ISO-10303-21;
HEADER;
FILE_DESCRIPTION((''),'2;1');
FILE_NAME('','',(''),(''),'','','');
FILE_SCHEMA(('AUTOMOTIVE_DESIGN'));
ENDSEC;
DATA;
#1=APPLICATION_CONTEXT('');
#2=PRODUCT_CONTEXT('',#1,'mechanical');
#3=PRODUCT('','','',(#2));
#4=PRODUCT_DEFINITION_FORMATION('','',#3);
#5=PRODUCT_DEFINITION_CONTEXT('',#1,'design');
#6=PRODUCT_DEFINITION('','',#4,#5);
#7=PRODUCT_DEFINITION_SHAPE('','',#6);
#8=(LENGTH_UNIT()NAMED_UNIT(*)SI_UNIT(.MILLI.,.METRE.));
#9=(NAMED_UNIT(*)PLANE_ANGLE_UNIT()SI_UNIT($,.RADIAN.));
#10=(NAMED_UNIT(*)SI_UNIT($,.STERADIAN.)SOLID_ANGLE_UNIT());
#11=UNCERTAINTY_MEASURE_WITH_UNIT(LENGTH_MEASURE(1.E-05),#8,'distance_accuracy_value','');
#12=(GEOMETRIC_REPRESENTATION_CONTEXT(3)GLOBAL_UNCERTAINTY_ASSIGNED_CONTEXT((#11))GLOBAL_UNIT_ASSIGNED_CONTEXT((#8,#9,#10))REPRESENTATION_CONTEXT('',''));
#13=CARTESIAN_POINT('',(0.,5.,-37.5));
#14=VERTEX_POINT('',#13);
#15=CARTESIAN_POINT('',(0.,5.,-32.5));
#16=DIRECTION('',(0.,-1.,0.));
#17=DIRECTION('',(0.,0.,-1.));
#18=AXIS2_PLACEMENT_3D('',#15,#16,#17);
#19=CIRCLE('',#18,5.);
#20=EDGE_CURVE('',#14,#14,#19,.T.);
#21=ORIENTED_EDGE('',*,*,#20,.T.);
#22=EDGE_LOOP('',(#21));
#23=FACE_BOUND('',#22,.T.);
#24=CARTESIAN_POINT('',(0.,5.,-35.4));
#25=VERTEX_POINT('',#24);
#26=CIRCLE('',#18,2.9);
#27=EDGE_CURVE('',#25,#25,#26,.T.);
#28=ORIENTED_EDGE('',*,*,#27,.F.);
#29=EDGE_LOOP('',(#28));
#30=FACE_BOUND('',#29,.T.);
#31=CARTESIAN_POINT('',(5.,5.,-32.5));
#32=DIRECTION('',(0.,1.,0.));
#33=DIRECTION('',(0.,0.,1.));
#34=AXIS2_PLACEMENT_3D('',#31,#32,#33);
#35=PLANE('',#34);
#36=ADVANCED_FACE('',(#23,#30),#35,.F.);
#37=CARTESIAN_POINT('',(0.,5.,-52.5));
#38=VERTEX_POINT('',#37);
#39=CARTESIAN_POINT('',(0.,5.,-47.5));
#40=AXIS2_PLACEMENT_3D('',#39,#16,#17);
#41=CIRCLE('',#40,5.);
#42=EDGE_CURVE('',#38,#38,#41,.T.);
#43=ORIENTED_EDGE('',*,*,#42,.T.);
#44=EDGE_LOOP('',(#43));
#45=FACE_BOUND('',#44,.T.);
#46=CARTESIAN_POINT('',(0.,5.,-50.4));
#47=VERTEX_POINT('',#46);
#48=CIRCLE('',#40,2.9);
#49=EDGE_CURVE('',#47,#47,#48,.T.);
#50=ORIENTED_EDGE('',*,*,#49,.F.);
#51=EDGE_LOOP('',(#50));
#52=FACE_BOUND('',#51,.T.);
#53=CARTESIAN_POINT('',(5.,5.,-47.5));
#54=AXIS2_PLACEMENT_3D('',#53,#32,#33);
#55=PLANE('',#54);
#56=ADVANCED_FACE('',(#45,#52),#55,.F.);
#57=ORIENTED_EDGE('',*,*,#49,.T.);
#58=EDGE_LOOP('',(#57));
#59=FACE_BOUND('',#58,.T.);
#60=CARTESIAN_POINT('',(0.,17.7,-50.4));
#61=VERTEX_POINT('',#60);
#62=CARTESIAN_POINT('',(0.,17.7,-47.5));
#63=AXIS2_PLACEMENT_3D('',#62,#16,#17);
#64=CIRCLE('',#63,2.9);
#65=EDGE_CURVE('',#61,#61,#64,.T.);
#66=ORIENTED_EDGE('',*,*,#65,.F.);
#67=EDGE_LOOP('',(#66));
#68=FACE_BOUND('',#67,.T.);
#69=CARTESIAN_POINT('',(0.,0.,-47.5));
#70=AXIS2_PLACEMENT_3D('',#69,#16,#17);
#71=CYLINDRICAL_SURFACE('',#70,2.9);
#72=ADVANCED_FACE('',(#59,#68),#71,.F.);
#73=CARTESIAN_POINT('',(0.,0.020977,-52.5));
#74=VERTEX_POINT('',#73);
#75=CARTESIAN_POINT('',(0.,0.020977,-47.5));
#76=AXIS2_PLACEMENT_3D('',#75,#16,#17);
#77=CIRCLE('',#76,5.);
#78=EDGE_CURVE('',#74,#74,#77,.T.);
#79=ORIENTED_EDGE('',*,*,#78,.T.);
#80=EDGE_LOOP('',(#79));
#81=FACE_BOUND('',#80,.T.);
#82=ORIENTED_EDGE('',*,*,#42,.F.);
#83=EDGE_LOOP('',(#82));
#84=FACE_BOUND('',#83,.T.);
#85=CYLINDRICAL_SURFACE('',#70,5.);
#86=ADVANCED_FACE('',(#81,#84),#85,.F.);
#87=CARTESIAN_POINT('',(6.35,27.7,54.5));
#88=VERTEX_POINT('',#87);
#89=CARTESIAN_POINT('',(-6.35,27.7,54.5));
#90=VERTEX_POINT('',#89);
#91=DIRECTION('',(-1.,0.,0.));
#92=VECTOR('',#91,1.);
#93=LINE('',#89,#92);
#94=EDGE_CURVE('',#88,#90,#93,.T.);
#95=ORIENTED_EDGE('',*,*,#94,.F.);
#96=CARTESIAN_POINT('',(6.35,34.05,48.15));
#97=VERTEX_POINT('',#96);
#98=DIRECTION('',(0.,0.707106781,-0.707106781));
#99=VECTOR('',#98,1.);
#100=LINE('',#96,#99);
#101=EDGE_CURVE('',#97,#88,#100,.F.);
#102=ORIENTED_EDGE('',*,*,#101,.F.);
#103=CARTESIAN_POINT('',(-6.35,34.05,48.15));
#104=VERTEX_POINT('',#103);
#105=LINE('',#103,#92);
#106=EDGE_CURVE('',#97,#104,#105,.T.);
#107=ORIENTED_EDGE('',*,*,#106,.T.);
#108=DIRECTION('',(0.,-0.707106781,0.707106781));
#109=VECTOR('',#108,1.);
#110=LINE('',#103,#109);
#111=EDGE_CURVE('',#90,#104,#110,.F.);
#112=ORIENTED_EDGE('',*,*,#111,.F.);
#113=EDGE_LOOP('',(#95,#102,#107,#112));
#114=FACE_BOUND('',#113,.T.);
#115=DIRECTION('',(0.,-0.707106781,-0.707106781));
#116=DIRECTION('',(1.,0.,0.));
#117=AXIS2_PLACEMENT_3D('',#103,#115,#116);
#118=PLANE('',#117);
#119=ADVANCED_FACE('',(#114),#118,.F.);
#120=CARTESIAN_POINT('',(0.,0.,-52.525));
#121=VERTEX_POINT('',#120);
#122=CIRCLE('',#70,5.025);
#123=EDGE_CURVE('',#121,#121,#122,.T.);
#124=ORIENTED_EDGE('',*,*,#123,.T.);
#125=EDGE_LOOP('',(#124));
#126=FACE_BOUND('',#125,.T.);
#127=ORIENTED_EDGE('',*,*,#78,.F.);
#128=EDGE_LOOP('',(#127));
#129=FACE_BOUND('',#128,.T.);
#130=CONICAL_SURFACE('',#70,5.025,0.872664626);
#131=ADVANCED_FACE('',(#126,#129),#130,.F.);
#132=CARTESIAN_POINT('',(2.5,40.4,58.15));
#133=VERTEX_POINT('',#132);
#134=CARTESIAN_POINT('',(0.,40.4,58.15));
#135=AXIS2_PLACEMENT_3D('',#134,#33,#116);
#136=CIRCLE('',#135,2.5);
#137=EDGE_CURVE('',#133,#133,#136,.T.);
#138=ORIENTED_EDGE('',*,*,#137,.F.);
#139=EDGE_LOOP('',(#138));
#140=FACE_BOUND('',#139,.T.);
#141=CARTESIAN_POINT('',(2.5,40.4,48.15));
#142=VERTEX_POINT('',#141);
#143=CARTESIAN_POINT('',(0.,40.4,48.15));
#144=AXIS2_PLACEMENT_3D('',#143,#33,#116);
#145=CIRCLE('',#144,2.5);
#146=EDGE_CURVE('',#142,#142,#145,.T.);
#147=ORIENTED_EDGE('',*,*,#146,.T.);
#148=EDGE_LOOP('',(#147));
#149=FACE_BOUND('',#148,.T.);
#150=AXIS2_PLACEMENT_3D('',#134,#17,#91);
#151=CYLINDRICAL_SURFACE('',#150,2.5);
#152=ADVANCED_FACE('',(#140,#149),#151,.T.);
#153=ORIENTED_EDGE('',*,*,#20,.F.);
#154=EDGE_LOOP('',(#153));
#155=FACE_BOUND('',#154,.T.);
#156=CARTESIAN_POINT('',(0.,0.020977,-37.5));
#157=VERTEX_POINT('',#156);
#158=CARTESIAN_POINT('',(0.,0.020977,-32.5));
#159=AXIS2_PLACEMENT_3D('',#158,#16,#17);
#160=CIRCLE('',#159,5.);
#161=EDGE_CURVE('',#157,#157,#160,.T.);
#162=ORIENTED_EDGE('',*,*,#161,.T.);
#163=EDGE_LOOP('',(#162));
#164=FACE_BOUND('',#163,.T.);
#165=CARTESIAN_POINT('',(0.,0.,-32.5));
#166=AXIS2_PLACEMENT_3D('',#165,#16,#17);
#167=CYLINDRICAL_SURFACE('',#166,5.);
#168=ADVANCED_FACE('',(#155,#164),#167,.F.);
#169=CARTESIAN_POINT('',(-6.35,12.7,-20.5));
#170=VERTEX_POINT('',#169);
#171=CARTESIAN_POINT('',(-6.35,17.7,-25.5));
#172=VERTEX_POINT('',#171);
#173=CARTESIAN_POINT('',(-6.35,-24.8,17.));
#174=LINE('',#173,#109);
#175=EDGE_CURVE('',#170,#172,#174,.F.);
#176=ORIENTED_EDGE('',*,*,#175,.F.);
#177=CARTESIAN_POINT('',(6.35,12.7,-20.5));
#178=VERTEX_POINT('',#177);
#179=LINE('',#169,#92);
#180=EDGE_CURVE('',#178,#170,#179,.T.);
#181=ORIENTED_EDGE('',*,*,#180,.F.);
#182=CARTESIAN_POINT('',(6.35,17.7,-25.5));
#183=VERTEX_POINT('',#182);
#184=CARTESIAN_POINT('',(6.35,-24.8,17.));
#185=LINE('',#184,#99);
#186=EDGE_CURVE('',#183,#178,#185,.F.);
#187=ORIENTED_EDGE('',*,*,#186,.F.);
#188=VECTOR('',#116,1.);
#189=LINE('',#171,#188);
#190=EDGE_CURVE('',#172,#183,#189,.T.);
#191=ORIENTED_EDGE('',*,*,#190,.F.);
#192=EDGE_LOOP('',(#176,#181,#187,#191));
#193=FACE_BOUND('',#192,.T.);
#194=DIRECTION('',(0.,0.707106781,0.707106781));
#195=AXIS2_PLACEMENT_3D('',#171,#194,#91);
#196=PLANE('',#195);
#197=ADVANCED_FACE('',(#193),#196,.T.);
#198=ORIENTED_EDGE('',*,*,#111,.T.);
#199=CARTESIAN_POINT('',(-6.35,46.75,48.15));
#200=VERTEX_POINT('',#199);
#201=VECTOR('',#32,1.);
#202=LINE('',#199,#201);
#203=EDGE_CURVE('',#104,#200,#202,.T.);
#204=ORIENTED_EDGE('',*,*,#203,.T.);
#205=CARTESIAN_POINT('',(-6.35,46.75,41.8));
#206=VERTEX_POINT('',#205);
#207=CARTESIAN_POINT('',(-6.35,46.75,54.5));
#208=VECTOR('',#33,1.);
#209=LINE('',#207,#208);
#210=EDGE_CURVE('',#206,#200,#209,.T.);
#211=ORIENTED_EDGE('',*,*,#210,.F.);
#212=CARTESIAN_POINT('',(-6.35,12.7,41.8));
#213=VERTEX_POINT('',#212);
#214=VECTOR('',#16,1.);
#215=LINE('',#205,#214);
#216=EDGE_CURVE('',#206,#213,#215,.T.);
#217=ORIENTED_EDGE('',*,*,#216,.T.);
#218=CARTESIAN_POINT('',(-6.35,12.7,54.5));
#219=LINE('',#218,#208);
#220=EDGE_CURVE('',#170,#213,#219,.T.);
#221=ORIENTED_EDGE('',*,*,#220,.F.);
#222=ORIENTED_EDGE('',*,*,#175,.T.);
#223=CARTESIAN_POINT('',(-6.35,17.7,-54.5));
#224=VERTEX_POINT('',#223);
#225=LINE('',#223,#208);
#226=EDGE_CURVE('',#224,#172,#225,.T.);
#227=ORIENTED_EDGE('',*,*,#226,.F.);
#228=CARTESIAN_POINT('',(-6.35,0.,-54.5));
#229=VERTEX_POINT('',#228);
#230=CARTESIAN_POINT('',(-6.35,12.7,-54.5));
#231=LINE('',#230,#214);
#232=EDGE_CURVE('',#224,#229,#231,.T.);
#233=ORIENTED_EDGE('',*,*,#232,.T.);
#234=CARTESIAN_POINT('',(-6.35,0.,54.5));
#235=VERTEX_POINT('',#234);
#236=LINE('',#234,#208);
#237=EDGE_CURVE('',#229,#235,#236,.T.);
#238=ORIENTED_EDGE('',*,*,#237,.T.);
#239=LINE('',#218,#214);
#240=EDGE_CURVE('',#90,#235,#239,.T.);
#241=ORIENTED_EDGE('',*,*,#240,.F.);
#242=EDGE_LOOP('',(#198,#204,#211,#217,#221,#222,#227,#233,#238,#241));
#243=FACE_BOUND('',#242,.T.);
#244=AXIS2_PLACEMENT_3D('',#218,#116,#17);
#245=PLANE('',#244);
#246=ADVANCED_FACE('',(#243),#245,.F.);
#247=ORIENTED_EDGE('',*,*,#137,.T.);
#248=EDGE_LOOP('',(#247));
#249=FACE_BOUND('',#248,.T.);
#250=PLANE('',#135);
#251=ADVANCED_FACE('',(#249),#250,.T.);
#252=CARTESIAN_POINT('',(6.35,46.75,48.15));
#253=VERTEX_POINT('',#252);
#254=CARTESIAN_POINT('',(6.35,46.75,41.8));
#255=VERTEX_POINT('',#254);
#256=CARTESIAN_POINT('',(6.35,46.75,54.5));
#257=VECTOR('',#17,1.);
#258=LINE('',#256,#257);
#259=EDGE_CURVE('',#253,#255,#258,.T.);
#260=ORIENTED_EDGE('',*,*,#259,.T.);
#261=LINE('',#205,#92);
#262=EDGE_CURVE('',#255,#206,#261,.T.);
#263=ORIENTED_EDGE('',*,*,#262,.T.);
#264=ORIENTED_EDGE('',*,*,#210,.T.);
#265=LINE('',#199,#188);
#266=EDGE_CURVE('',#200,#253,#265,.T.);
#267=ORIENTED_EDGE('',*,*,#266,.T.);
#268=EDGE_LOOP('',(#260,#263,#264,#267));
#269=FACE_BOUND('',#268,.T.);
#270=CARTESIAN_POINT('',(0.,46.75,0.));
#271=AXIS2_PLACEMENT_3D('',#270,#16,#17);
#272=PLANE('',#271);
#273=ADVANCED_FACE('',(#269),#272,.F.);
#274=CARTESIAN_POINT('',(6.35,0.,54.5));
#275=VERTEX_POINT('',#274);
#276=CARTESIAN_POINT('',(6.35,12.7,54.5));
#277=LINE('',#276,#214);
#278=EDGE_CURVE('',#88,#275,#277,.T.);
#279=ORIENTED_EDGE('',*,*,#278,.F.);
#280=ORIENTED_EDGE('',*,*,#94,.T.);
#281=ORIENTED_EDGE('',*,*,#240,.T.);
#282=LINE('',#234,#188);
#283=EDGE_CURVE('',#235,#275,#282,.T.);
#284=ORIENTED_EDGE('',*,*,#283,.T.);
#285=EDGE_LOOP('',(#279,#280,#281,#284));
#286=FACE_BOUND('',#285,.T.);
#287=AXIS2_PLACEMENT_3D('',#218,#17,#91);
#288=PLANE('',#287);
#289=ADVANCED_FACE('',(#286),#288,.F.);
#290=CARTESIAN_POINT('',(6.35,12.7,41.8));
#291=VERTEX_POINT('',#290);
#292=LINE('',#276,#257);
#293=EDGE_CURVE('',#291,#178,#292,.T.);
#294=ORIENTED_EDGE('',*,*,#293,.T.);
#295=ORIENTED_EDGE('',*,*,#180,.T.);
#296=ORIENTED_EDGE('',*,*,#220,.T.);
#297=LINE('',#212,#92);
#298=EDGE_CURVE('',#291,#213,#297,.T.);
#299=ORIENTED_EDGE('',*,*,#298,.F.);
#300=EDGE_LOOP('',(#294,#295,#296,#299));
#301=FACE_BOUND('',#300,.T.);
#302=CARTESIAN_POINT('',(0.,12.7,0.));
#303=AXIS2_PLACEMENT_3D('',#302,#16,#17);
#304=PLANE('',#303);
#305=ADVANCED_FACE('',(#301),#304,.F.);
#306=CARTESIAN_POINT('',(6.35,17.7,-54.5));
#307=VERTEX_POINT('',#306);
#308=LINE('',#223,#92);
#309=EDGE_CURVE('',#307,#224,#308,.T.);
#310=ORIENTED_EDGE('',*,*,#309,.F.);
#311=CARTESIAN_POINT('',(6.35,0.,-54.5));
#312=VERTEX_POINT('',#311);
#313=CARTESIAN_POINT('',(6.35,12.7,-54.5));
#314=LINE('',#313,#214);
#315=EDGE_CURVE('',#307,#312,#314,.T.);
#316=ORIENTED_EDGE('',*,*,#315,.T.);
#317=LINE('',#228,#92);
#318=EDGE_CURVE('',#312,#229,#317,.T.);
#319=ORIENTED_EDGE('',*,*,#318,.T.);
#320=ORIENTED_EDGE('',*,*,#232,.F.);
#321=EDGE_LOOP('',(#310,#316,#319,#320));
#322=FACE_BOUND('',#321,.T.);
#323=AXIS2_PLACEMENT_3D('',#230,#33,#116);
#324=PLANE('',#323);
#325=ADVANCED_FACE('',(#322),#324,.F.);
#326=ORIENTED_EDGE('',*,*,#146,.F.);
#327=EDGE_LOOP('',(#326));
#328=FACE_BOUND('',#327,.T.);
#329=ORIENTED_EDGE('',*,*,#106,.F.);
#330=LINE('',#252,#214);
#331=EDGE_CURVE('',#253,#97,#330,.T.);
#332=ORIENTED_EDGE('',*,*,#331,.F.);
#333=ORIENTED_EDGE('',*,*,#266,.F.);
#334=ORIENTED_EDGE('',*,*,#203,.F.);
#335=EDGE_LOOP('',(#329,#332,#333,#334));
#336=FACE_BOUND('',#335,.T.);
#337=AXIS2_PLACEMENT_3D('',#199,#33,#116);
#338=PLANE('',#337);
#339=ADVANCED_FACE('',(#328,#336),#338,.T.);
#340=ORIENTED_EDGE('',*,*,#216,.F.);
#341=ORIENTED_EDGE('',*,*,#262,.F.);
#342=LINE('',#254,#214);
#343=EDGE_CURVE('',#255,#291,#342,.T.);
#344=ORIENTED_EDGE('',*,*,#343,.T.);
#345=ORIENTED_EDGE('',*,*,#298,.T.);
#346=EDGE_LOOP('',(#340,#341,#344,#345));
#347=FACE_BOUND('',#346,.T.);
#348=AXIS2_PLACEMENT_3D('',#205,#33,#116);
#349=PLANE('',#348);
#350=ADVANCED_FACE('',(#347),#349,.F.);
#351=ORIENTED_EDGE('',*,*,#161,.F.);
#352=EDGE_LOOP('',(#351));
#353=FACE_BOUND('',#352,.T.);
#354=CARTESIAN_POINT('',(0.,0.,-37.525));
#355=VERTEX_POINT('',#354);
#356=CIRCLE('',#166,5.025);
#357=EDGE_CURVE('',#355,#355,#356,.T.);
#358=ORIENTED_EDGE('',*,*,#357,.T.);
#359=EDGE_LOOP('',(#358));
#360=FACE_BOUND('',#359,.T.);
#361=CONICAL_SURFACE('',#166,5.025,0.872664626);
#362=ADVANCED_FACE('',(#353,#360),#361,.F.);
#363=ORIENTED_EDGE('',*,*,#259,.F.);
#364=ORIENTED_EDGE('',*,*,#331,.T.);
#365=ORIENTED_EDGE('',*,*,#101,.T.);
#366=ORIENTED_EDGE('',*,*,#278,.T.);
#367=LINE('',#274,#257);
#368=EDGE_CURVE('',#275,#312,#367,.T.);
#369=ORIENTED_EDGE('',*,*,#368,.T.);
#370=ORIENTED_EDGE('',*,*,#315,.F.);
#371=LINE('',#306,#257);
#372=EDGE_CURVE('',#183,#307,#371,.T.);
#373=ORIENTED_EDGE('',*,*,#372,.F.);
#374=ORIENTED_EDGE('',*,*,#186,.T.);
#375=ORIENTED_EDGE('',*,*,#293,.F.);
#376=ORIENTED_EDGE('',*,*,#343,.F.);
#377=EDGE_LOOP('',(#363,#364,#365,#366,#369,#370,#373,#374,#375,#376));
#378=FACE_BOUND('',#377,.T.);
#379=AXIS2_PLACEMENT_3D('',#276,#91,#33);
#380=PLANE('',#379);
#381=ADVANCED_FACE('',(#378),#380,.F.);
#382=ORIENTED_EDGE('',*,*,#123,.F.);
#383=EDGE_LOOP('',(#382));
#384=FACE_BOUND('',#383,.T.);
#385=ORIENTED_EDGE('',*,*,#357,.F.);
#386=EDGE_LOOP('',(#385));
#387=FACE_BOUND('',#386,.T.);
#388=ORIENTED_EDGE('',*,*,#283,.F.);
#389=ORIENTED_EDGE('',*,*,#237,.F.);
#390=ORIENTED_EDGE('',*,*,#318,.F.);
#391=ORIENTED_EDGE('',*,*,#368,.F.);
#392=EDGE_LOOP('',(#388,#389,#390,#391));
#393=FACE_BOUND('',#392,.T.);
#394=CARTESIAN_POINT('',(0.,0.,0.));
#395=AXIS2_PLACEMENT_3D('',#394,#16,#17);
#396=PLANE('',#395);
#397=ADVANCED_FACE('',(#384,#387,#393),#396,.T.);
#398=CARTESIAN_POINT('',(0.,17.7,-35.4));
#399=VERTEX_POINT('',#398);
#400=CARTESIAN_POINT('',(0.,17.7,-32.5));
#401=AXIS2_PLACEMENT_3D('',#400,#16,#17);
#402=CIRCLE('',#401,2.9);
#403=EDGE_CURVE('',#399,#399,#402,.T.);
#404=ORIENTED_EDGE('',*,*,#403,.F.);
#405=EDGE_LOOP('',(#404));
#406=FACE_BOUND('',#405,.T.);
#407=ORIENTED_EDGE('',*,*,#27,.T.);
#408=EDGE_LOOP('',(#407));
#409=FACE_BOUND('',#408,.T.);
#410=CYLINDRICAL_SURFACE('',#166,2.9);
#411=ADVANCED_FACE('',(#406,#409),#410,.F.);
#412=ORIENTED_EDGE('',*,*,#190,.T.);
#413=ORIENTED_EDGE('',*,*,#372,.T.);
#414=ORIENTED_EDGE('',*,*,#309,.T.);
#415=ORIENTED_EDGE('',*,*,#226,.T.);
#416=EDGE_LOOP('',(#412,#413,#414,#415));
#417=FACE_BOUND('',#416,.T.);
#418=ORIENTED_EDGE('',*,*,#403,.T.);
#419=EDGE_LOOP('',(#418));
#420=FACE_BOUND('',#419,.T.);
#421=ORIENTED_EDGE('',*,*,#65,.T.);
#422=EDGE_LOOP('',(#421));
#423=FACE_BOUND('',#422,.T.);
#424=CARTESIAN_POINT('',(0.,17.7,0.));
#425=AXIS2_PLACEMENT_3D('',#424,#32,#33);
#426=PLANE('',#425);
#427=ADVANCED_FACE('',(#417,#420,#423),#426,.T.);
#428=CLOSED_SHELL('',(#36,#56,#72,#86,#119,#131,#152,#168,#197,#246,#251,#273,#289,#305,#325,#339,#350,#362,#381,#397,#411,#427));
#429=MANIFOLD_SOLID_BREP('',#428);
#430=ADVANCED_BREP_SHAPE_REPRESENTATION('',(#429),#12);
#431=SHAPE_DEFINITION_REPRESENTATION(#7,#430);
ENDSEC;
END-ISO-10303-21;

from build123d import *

# Parameters (mm, degrees)
SKETCH2_W                     = 12.7
SKETCH2_H                     = 109
BOSS_EXTRUDE1_DEPTH           = 12.7
SKETCH5_W                     = 12.7
SKETCH5_H                     = 29
BOSS_EXTRUDE2_DEPTH           = 5
CBORE_FOR_M5_SHCS1_AT_2_COUNT = 2
CBORE_FOR_M5_SHCS1_AT_2_PITCH = 15
CHAMFER1_SIZE                 = 5
SKETCH7_W                     = 12.7
SKETCH7_H                     = 12.7
BOSS_EXTRUDE4_DEPTH           = 34.05
SKETCH9_W                     = 12.7
SKETCH9_H                     = 12.7
CUT_EXTRUDE2_DEPTH            = 6.35
SKETCH6_R                     = 2.5
BOSS_EXTRUDE7_DEPTH           = 10
CHAMFER3_SIZE                 = 6.35


with BuildPart() as part:
    # Sketch2 → Boss-Extrude1 (new body)
    with BuildSketch(Plane(origin=(0, 0, 0), x_dir=(1, 0, 0), z_dir=(0, 1, 0))):
        Rectangle(SKETCH2_W, SKETCH2_H)
    extrude(amount=BOSS_EXTRUDE1_DEPTH)

    # Sketch5 → Boss-Extrude2 (add)
    with BuildSketch(Plane(origin=(0, 12.7, 0), x_dir=(1, 0, 0), z_dir=(0, 1, 0))):
        with Locations((0, 40)):
            Rectangle(SKETCH5_W, SKETCH5_H)
    extrude(amount=BOSS_EXTRUDE2_DEPTH)

    # Sketch4 → CBORE for M5 SHCS1 (revolve, cut)
    with BuildSketch(Plane(origin=(0, 0, -47.5), x_dir=(0, 0, -1), z_dir=(1, 0, 0))):
        Polygon((0, 0), (0, 17.7), (2.9, 17.7), (2.9, 5), (5, 5), (5, 0.020977491), (5.025, 0), align=None)
    cbore_for_m5_shcs1 = revolve(axis=Axis((0, -6.35, -47.5), (0, 1, 0)), mode=Mode.SUBTRACT)

    # CBORE for M5 SHCS1 at 2: CBORE for M5 SHCS1 ×2
    with Locations(*[(0, 0, i * CBORE_FOR_M5_SHCS1_AT_2_PITCH) for i in range(1, CBORE_FOR_M5_SHCS1_AT_2_COUNT)]):
        add(cbore_for_m5_shcs1, mode=Mode.SUBTRACT)

    # Chamfer1
    chamfer1_edges = [part.edges().sort_by_distance(p)[0] for p in [
        (0, 12.7, -25.5),
    ]]
    chamfer(chamfer1_edges, length=CHAMFER1_SIZE - 0.0001)  # a hair under: the kernel refuses the full size

    # Sketch7 → Boss-Extrude4 (add)
    with BuildSketch(Plane(origin=(0, 12.7, 0), x_dir=(1, 0, 0), z_dir=(0, 1, 0))):
        with Locations((0, -48.15)):
            Rectangle(SKETCH7_W, SKETCH7_H)
    extrude(amount=BOSS_EXTRUDE4_DEPTH)

    # Sketch9 → Cut-Extrude2 (cut)
    with BuildSketch(Plane.XY.offset(54.5)):
        with Locations((0, 40.4)):
            Rectangle(SKETCH9_W, SKETCH9_H)
    extrude(amount=-CUT_EXTRUDE2_DEPTH, mode=Mode.SUBTRACT)

    # Sketch6 → Boss-Extrude7 (add)
    with BuildSketch(Plane.XY.offset(48.15)):
        with Locations((0, 40.4)):
            Circle(SKETCH6_R)
    extrude(amount=BOSS_EXTRUDE7_DEPTH)

    # Chamfer3
    chamfer3_edges = [part.edges().sort_by_distance(p)[0] for p in [
        (0, 34.05, 54.5),
    ]]
    chamfer(chamfer3_edges, length=CHAMFER3_SIZE - 0.0001)  # a hair under: the kernel refuses the full size


solid = part.part
